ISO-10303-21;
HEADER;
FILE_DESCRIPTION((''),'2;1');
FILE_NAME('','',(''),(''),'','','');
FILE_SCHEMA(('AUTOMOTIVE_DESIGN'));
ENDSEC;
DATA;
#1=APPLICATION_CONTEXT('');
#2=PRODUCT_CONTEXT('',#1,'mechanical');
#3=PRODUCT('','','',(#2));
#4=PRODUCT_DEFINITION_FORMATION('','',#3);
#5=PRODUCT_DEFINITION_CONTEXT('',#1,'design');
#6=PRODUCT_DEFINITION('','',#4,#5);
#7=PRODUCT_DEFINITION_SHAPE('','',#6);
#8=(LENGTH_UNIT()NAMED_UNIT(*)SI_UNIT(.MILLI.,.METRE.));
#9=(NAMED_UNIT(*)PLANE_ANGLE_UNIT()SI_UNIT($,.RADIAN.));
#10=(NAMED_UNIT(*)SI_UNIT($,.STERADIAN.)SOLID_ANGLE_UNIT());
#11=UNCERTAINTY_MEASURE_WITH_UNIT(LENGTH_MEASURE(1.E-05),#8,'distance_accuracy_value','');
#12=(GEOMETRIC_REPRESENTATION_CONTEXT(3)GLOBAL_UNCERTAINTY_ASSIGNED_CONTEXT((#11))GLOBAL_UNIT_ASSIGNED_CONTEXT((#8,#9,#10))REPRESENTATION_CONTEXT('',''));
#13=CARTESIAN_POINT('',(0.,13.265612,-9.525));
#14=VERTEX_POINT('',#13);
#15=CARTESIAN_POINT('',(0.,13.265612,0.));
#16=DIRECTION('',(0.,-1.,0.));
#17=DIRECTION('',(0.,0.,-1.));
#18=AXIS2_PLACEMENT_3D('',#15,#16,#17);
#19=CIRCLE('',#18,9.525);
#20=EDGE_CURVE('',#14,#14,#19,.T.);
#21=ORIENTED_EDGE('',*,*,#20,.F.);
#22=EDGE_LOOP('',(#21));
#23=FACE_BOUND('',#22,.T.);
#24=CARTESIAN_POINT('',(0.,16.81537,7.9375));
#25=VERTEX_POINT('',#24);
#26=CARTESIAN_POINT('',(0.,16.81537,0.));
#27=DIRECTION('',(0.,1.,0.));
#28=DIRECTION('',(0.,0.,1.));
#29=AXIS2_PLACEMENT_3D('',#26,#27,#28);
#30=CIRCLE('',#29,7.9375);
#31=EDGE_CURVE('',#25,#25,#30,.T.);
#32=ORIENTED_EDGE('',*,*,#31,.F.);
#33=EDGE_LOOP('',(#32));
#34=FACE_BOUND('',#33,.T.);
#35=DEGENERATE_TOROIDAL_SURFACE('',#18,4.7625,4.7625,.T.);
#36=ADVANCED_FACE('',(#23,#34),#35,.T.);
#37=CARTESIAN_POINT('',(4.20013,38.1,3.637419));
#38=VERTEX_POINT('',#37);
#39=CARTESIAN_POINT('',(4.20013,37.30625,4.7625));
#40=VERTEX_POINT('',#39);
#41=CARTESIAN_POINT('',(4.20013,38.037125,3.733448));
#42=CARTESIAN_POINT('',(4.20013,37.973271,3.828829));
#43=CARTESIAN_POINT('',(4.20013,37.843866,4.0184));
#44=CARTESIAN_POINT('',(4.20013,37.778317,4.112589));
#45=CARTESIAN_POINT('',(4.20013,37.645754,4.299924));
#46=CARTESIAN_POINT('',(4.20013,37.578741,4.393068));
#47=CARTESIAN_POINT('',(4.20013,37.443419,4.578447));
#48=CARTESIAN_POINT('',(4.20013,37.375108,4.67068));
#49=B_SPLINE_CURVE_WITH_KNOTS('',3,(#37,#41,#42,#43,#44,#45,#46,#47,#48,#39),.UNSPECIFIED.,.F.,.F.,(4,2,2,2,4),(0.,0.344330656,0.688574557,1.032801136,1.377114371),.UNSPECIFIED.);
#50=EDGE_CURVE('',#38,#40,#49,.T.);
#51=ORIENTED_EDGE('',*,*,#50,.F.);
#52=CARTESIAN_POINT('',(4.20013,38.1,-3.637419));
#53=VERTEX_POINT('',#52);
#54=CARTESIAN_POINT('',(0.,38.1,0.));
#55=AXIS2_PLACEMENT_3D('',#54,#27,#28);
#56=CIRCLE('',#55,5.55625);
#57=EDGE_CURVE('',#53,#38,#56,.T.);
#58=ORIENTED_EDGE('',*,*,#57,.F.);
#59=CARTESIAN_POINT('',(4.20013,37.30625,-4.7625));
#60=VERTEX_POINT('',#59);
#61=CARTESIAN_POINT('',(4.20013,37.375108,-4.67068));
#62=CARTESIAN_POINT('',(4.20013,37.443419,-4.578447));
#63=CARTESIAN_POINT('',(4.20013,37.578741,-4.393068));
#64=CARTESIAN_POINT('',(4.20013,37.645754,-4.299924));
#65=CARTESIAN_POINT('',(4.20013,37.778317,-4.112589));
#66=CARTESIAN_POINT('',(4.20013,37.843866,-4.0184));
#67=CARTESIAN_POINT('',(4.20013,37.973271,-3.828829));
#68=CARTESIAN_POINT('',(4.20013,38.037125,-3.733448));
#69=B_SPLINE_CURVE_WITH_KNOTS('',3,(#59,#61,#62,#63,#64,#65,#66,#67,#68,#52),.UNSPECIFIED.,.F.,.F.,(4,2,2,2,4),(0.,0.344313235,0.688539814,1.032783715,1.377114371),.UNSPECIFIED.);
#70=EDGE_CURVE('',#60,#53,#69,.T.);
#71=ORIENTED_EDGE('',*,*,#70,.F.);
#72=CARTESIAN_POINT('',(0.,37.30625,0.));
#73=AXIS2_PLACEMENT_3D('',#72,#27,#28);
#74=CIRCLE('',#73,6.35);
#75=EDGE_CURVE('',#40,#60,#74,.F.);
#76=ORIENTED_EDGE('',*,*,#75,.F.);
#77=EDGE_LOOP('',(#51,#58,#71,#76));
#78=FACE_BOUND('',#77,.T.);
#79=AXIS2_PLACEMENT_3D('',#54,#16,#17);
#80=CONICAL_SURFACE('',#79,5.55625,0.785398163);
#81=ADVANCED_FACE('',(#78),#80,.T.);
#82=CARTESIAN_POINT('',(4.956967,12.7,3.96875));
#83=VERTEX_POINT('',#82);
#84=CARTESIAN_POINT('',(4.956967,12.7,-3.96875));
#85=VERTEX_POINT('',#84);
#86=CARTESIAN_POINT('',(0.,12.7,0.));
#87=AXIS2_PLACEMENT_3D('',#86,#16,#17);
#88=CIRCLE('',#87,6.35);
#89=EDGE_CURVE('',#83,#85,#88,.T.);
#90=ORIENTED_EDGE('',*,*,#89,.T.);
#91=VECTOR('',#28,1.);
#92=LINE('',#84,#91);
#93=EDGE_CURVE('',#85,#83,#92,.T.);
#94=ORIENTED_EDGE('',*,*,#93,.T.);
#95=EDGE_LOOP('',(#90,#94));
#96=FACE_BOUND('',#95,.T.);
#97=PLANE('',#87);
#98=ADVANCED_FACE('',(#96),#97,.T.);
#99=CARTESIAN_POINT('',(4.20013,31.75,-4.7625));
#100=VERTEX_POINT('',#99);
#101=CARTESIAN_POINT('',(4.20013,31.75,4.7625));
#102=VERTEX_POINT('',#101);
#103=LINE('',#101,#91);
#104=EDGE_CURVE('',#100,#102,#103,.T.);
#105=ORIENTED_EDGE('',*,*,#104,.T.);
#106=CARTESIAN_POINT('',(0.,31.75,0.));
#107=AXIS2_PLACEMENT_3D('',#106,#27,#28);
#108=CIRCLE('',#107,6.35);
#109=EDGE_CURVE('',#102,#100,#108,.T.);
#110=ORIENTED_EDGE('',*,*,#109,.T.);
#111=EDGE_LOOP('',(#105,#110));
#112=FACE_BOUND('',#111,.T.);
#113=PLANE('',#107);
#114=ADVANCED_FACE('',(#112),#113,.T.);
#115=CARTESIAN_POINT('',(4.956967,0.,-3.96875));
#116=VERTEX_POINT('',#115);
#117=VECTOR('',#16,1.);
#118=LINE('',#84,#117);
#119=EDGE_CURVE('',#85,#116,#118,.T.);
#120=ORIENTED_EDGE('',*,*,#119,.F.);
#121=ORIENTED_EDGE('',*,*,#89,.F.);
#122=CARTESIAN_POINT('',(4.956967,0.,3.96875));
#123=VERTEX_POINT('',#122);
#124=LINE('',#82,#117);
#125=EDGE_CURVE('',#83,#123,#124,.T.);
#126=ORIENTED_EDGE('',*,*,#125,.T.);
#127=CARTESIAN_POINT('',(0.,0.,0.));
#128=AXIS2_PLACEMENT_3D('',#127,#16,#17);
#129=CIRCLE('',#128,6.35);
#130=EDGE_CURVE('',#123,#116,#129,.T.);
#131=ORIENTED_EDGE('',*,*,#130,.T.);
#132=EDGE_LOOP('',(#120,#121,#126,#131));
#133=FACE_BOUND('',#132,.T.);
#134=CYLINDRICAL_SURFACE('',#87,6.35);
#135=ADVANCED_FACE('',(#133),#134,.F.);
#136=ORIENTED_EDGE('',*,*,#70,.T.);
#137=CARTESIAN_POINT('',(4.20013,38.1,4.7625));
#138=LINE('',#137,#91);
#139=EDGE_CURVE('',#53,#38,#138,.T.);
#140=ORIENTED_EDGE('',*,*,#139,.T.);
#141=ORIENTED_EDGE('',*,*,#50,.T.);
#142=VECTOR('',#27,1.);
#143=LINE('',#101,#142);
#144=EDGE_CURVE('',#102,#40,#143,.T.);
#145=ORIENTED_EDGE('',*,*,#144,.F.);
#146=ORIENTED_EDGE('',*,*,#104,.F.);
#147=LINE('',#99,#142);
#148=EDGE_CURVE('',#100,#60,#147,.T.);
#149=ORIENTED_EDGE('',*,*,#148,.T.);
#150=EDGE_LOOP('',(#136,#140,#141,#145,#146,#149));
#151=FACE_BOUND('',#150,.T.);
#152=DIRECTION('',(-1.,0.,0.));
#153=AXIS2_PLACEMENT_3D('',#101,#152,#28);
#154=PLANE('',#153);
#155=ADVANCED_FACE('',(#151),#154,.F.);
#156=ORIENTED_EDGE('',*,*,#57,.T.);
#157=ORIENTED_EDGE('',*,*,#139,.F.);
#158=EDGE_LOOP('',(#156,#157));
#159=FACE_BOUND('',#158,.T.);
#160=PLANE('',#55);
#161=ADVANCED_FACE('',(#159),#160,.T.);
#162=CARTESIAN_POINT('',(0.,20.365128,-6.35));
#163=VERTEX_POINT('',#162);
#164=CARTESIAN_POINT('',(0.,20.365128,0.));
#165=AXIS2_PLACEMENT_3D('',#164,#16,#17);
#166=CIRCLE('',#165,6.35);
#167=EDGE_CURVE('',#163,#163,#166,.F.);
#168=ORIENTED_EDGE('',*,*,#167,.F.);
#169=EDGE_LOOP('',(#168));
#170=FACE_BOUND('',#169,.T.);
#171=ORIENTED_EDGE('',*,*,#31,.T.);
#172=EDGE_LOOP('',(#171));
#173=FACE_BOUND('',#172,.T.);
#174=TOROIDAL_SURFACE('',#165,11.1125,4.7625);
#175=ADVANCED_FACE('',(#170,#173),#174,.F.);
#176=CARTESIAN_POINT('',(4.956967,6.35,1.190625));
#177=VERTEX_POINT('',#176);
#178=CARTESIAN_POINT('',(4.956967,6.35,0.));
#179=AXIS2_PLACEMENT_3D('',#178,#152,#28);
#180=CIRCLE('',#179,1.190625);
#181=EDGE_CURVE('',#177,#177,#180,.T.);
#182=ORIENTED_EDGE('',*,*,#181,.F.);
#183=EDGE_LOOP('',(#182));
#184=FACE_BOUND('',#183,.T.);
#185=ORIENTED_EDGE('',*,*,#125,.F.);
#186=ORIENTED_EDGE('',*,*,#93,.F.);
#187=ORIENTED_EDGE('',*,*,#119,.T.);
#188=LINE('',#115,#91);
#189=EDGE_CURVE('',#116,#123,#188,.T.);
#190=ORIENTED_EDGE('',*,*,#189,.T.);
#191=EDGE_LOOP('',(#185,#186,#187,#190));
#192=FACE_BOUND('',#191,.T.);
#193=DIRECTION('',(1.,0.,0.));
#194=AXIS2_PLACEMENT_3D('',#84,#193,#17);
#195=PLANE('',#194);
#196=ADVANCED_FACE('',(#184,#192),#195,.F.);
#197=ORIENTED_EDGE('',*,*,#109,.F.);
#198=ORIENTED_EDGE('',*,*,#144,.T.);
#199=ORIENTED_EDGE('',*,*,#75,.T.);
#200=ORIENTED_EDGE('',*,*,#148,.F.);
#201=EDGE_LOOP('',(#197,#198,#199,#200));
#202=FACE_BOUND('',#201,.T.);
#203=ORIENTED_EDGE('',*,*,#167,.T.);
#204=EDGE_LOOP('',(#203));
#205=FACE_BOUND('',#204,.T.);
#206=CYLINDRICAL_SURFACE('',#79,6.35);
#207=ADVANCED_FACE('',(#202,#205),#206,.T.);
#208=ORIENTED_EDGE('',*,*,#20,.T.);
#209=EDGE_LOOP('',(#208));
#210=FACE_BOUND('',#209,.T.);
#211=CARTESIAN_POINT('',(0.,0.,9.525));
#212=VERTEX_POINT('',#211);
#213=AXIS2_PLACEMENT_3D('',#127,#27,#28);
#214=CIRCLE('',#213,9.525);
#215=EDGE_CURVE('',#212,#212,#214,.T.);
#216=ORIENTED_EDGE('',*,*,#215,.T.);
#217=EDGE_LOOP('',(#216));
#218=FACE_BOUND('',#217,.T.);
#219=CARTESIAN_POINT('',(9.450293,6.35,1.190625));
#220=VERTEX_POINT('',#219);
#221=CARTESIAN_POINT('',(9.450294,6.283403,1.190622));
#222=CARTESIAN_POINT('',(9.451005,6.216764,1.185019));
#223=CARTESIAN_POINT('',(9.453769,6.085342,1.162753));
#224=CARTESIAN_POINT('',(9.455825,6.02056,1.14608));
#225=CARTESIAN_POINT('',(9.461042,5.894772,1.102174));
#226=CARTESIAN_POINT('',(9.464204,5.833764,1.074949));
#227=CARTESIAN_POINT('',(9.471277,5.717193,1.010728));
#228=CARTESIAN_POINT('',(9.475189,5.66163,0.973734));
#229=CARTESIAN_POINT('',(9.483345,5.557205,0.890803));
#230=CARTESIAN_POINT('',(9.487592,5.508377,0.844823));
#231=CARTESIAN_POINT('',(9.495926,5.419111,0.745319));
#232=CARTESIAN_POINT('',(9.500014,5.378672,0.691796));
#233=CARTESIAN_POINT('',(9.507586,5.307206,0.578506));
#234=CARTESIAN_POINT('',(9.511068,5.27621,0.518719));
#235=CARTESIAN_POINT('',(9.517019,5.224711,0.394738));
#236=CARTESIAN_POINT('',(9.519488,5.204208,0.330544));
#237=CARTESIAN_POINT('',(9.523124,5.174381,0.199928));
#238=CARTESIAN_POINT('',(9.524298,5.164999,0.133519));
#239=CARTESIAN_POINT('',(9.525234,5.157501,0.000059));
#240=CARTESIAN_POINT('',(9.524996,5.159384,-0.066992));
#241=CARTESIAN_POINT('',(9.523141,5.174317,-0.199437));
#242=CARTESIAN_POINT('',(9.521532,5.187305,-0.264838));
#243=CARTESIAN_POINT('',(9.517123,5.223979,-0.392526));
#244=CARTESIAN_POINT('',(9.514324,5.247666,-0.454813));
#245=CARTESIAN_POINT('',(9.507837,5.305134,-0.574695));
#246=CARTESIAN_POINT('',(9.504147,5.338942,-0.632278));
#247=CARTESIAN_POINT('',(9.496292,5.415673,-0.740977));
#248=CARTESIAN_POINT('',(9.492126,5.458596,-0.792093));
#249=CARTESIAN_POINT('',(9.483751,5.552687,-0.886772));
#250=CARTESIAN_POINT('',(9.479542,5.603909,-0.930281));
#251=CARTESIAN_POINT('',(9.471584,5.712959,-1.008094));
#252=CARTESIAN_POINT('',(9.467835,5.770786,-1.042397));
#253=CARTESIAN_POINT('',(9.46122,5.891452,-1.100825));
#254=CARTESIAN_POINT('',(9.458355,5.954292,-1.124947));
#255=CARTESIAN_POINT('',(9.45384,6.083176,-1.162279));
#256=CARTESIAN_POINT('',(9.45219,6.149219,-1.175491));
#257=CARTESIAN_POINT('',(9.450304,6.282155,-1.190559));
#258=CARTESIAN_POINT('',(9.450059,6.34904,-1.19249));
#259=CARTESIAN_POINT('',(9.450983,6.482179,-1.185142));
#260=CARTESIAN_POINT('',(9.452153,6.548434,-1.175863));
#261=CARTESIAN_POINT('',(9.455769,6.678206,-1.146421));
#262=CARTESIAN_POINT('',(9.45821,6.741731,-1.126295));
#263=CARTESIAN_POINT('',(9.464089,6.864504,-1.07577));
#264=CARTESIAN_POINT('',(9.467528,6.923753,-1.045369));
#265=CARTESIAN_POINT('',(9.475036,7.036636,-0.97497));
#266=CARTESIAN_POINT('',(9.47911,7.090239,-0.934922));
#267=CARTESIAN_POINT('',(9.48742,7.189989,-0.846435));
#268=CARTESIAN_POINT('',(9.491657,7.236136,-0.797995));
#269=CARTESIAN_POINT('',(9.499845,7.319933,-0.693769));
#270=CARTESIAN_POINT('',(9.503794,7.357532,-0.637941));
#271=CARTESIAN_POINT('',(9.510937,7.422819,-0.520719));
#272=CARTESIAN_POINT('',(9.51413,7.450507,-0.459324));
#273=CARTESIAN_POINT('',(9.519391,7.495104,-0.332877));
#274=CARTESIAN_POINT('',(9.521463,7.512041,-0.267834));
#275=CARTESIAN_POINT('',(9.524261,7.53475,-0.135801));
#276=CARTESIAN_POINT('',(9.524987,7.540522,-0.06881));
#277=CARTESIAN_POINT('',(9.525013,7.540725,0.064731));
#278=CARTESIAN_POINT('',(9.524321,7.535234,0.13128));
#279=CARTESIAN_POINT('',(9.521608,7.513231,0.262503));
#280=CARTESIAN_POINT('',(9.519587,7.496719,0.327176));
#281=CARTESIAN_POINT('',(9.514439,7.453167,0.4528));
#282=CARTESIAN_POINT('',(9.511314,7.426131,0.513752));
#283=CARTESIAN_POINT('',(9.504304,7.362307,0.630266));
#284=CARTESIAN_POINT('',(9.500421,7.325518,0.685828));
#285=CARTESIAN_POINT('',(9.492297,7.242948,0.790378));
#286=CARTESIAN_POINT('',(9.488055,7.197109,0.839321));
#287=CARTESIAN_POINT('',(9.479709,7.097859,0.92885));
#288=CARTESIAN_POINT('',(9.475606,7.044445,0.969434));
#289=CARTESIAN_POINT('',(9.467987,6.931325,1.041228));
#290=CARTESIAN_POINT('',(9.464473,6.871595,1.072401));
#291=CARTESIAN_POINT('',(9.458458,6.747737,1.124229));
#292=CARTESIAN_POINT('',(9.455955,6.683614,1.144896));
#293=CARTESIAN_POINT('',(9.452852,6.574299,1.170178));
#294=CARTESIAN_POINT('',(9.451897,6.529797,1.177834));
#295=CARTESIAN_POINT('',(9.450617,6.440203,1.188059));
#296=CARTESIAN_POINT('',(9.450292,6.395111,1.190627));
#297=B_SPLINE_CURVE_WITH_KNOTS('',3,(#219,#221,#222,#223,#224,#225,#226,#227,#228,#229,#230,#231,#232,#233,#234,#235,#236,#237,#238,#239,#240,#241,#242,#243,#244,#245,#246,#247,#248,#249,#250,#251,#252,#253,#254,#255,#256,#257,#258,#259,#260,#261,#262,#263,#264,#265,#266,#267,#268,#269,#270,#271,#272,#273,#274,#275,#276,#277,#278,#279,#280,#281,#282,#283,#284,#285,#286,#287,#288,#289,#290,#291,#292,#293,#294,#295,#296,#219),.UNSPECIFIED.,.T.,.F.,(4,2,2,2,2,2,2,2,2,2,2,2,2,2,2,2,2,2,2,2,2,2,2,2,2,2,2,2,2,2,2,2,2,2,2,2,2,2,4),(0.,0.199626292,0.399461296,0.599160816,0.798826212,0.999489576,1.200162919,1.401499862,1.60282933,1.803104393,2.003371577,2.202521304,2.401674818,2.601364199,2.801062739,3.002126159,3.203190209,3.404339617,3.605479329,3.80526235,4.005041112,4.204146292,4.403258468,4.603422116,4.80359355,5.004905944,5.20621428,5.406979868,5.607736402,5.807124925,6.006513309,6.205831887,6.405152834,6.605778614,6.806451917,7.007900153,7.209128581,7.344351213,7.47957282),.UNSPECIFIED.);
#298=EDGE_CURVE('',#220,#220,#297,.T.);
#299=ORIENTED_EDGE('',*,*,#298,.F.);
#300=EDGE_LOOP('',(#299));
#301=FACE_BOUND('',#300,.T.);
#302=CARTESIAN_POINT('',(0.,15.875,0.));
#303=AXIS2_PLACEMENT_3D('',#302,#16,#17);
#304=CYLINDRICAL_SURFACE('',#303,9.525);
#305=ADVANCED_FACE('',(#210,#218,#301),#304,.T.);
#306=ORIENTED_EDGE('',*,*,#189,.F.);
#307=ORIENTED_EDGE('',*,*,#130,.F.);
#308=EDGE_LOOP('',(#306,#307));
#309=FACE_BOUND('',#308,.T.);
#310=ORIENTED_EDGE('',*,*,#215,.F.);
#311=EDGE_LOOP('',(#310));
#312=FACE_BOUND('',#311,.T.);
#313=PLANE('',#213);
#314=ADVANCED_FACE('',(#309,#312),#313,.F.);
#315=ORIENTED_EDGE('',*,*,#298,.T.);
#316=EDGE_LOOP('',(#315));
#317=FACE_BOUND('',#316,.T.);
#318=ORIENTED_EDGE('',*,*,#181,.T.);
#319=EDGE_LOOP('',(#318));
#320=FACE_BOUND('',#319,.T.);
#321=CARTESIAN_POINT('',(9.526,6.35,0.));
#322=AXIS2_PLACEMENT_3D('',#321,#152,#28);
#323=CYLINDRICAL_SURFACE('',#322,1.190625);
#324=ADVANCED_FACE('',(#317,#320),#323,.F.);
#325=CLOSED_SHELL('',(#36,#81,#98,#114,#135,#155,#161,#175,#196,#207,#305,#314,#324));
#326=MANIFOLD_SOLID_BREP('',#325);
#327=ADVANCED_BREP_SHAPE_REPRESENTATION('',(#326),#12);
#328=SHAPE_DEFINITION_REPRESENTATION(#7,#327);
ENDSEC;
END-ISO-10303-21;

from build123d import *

# Parameters (mm, degrees)
SKETCH1_R           = 9.525
MALE_END_DEPTH      = 15.875
SKETCH2_R           = 6.35
FEMALE_END_DEPTH    = 38.1
UPPER_R             = 4.7625
LOWER_R             = 4.7625
D_CUT_DEPTH         = 12.7
SET_HOLE_REACH      = 43.858
SET_HOLE_END_RADIUS = 9.525
SKETCH5_R           = 1.190625
D_START             = -6.35
D_BOSS_DEPTH        = 6.35
EDGE_CHAMFER_SIZE   = 0.79375


with BuildPart() as part:
    # Sketch1 → male end (new body)
    with BuildSketch(Plane(origin=(0, 0, 0), x_dir=(1, 0, 0), z_dir=(0, 1, 0))):
        with Locations(Location((0, 0, 0), (0, 0, 270))):
            Circle(SKETCH1_R)
    extrude(amount=MALE_END_DEPTH)

    # Sketch2 → female end (add)
    with BuildSketch(Plane(origin=(0, 0, 0), x_dir=(-1, 0, 0), z_dir=(0, 1, 0))):
        with Locations(Location((0, 0, 0), (0, 0, 270))):
            Circle(SKETCH2_R)
    extrude(amount=FEMALE_END_DEPTH)

    # upper
    # the kernel refuses this fillet: 4.7625 mm, written as the material it adds along each edge
    with BuildSketch(Plane(origin=(0, 15.875, 0), x_dir=(0, 0, -1), z_dir=(-1, 0, 0))) as upper_piece_1:
        with BuildLine():
            CenterArc((11.1125, -4.490128061), UPPER_R, 109.471220634, 70.528779366)
            Line((6.35, -4.490128061), (6.25475, -4.490128061))
            Line((6.25475, -4.490128061), (6.25475, 0))
            Line((6.25475, 0), (6.35, 0.09525))
            ThreePointArc((6.35, 0.09525), (7.9375, 0.09525), (9.49325, 0.089802561))
            Line((9.49325, 0.089802561), (9.525, 0))
        make_face()
    revolve(axis=Axis((0, 15.875, 0), (0, -1, 0)))

    # lower
    lower_edges = [part.edges().sort_by_distance(p)[0] for p in [
        (9.525, 15.875, 0),
    ]]
    fillet(lower_edges, radius=LOWER_R)

    # Sketch3 → D cut (cut)
    with BuildSketch(Plane.XZ):
        with BuildLine():
            Line((4.956967161, -3.96875), (4.956967161, 3.96875))
            ThreePointArc((4.956967161, 3.96875), (-6.35, 0), (4.956967161, -3.96875))
        make_face()
    extrude(amount=-D_CUT_DEPTH, mode=Mode.SUBTRACT)

    # set hole: up to this cylinder (the profile starts inside it)
    set_hole_end = Plane(origin=(0, 6.35, 0), z_dir=(0, -1, 0)) * Cylinder(SET_HOLE_END_RADIUS, 107.766, mode=Mode.PRIVATE)
    # Sketch5 → set hole (cut, up to the surface)
    with BuildSketch(Plane.ZY.offset(-4.956967161), mode=Mode.PRIVATE) as set_hole_sk1:
        with Locations((0, 6.35)):
            Circle(SKETCH5_R)
    set_hole_tool1 = extrude(set_hole_sk1.sketch, amount=-SET_HOLE_REACH, mode=Mode.PRIVATE) & set_hole_end
    add(set_hole_tool1.solids().sort_by_distance((4.956967, 6.35, 0))[0], mode=Mode.SUBTRACT)

    # Sketch4 → D boss (cut)
    with BuildSketch(Plane(origin=(0, 38.1, 0), x_dir=(-1, 0, 0), z_dir=(0, 1, 0)).offset(D_START)):
        with BuildLine():
            Line((-4.200130206, 4.7625), (-4.200130206, -4.7625))
            ThreePointArc((-4.200130206, -4.7625), (-6.35, 0), (-4.200130206, 4.7625))
        make_face()
    extrude(amount=D_BOSS_DEPTH, mode=Mode.SUBTRACT)

    # edge chamfer
    edge_chamfer_edges = [part.edges().sort_by_distance(p)[0] for p in [
        (-5.939881102, 38.1, 2.24506403),
    ]]
    chamfer(edge_chamfer_edges, length=EDGE_CHAMFER_SIZE)


solid = part.part
